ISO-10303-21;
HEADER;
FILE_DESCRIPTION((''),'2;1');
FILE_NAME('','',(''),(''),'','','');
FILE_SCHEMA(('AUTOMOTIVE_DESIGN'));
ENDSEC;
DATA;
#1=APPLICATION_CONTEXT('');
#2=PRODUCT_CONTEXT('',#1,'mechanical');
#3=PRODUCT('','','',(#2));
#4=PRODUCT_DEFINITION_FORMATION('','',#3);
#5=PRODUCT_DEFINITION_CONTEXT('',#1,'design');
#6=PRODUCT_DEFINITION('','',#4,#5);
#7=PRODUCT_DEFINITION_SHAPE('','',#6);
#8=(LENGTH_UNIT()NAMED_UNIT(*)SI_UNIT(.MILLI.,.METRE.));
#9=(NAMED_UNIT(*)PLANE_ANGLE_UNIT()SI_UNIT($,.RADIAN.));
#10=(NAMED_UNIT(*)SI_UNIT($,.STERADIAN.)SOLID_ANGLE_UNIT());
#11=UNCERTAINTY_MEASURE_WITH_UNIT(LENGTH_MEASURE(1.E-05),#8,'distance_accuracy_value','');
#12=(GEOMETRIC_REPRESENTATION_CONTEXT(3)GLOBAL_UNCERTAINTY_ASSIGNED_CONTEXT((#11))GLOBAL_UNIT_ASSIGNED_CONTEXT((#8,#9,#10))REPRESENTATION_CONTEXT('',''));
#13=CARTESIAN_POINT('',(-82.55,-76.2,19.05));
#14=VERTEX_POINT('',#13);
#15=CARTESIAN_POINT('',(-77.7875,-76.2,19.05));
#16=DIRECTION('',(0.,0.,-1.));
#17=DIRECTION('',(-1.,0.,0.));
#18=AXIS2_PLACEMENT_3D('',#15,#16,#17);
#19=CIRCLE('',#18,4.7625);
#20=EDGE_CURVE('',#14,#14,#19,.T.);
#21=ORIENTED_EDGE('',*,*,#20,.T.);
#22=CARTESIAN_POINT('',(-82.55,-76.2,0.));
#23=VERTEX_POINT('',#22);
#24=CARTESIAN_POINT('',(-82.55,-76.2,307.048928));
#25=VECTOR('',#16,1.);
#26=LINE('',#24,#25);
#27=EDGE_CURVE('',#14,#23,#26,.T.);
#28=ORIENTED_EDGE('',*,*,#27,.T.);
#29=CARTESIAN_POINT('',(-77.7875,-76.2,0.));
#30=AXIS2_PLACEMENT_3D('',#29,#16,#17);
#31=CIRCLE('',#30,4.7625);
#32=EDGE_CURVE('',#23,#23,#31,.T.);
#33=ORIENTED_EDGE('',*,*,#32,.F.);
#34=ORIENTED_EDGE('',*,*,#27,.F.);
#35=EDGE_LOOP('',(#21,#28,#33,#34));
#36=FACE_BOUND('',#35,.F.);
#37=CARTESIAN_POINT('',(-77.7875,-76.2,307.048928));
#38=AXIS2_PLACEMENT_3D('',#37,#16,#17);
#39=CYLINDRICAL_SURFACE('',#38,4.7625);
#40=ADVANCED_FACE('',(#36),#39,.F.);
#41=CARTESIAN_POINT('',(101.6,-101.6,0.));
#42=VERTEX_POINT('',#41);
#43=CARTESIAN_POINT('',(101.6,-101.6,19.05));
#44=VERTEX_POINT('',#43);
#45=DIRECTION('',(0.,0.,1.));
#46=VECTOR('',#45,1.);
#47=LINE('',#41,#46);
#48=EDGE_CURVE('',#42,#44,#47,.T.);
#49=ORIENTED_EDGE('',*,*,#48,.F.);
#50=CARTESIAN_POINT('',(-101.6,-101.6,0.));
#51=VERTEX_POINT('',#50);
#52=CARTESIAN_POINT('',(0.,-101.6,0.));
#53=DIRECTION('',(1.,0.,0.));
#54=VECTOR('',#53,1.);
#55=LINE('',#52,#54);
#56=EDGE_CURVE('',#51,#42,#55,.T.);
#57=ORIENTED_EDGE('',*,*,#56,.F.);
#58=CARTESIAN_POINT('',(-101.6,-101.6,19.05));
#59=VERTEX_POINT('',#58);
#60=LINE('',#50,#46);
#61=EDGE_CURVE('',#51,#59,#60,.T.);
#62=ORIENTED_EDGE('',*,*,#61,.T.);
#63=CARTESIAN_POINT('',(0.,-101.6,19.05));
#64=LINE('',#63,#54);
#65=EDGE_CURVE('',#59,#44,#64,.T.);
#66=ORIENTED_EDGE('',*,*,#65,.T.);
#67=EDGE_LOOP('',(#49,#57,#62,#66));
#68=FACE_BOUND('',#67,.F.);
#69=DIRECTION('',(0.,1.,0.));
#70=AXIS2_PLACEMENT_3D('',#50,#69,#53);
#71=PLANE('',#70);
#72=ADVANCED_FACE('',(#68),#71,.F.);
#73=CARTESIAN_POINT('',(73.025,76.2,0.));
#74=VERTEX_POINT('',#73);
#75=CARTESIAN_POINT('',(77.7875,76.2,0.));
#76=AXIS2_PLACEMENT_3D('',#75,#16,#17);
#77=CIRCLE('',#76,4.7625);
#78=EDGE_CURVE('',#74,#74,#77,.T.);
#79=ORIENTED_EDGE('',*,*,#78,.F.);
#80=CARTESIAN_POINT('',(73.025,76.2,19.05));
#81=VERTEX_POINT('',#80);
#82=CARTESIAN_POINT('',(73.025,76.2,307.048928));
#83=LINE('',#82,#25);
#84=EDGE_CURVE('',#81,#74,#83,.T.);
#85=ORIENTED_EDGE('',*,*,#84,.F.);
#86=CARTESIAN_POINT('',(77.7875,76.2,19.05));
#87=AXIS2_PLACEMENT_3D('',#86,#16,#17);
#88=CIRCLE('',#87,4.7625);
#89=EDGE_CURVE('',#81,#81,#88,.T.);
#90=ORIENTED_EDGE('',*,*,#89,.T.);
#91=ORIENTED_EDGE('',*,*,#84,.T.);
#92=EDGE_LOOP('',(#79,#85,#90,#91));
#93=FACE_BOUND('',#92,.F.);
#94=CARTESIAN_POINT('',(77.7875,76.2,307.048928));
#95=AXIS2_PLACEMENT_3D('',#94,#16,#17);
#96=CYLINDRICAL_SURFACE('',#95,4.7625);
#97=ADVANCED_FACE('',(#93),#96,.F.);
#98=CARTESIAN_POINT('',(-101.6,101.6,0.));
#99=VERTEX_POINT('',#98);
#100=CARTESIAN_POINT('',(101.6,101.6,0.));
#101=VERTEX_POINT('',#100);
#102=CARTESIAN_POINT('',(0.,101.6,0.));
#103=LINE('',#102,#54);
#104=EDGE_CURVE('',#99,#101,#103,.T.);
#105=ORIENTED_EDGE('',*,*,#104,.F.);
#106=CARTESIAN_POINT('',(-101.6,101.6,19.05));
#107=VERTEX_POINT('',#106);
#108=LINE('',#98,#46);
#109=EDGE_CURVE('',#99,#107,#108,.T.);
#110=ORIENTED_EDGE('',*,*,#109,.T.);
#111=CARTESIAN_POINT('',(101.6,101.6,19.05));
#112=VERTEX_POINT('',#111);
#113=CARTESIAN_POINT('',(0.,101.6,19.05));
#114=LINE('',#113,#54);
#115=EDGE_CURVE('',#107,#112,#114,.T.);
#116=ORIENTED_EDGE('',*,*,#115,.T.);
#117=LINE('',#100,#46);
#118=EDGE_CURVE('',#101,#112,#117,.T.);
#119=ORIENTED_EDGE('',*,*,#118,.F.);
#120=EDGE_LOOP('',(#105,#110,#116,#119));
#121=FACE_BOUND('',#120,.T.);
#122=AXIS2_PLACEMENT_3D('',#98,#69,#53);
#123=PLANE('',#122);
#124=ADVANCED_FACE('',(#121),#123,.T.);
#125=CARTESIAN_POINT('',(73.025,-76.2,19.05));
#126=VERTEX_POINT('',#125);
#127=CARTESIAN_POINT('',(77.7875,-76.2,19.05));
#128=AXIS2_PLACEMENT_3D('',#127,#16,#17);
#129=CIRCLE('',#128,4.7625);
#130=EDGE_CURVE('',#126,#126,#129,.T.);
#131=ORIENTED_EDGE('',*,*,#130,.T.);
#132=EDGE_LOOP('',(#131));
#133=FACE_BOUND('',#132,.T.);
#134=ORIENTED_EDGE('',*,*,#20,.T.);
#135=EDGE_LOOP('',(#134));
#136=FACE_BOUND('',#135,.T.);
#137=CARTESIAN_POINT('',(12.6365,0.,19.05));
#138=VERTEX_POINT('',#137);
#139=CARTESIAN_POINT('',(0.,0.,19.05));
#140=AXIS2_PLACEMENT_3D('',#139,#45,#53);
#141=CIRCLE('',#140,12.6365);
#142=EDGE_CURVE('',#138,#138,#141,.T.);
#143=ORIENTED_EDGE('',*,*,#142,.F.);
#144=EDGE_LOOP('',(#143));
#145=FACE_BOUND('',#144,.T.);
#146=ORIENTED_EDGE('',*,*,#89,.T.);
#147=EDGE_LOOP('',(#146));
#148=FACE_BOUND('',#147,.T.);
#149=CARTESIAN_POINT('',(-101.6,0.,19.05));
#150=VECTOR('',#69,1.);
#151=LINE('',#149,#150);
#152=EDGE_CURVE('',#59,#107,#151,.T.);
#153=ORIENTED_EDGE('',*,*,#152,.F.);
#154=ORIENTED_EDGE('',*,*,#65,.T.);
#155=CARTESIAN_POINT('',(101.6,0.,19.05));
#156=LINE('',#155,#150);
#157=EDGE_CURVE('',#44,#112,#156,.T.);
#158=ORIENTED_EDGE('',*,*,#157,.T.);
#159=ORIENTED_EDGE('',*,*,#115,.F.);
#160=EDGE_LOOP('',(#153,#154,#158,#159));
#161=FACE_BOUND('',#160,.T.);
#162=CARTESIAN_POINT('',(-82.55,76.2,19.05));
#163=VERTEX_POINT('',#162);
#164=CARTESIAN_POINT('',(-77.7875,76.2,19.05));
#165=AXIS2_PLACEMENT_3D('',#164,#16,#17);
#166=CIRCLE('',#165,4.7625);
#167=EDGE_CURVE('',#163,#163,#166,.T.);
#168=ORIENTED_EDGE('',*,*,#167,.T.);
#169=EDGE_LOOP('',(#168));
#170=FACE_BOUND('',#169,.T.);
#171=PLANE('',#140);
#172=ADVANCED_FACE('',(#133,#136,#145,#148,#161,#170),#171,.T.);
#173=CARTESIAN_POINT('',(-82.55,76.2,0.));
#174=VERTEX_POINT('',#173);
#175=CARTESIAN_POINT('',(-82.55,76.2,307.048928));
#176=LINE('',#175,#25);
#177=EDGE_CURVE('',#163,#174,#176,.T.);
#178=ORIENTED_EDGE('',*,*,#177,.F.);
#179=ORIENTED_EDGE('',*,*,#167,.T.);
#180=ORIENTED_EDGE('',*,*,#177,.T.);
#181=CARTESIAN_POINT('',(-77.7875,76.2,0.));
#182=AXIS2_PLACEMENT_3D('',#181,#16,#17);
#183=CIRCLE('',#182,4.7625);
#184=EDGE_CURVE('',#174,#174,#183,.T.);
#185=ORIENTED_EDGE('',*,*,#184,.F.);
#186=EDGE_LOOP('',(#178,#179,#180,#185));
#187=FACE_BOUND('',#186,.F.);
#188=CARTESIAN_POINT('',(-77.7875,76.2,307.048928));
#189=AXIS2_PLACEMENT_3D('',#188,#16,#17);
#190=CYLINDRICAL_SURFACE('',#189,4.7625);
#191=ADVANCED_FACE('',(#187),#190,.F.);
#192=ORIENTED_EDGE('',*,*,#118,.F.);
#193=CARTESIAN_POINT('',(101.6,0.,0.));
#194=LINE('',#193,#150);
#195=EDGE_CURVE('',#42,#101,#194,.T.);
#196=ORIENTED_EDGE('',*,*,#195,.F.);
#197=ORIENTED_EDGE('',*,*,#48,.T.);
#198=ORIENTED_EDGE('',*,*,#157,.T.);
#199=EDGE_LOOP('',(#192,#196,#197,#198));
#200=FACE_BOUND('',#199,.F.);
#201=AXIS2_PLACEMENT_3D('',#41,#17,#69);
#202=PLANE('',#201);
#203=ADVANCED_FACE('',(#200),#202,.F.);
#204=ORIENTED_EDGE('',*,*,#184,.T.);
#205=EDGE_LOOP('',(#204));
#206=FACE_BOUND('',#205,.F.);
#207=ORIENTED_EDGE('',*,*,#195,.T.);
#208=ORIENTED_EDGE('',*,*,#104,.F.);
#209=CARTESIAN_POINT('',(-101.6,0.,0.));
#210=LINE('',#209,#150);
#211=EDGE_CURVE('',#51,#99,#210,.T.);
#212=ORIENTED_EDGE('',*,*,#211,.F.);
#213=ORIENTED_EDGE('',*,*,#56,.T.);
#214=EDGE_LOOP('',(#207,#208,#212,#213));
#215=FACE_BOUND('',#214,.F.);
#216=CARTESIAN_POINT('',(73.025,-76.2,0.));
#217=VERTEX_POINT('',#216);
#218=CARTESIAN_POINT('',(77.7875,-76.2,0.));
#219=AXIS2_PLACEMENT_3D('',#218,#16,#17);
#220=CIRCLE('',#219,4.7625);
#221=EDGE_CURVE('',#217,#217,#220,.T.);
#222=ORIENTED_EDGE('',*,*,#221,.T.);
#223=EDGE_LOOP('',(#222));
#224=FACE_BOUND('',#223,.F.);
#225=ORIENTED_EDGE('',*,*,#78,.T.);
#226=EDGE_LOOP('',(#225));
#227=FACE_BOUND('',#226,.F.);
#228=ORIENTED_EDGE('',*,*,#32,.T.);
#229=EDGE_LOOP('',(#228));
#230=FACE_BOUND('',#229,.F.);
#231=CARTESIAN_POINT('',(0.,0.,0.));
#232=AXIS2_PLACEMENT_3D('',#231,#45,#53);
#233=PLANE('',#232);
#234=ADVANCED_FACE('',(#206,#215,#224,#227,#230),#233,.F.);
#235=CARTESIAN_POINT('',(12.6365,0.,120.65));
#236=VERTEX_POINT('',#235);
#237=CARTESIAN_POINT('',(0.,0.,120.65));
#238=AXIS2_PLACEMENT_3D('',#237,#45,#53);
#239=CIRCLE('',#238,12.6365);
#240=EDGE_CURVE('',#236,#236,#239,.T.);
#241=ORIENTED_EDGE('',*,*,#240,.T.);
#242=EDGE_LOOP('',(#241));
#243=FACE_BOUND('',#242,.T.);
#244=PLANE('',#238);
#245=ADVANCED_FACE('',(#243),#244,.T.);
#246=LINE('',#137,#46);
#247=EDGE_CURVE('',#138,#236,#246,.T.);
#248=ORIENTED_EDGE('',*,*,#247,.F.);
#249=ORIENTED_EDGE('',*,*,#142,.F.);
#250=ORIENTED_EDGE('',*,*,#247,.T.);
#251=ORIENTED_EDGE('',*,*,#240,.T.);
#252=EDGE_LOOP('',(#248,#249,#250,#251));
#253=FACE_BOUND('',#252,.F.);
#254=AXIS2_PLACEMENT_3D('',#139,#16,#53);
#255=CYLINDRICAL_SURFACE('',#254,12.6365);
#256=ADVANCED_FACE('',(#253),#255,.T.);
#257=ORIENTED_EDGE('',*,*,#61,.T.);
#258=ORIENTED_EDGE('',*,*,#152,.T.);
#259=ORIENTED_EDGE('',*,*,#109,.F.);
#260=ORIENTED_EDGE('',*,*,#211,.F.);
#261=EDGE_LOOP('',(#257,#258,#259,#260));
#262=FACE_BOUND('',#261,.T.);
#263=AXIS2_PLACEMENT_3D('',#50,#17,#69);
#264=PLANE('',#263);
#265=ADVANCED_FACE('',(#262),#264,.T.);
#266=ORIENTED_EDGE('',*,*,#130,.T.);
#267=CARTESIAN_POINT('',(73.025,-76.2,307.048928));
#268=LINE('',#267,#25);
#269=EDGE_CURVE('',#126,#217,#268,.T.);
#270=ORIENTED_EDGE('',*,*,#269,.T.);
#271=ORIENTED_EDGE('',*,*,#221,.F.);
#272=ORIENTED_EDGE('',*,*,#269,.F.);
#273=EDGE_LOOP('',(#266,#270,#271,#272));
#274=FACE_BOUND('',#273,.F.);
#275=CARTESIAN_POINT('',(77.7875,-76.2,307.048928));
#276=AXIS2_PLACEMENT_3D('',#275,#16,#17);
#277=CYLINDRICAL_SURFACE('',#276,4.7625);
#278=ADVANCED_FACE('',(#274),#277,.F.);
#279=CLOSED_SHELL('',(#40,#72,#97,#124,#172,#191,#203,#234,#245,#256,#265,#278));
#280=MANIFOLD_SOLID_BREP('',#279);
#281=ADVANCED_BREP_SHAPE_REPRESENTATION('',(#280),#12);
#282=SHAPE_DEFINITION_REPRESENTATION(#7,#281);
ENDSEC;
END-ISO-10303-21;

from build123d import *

# Parameters (mm, degrees)
F0_W     = 203.2
F0_H     = 203.2
F1_DEPTH = 19.05
F3_D     = 9.525
F4_R     = 12.6365
F5_DEPTH = 101.6


# Not quite as in the source:
# - a length typed as a fraction of an inch, garbled in the dataset ("3 / 203.2 mm" for 3/8 in), is restored


with BuildPart() as f1:
    # F0 (on Top) → F1 (new body)
    with BuildSketch(Plane.XY):
        Rectangle(F0_W, F0_H)
    extrude(amount=F1_DEPTH)

    # F3 (through all)
    with Locations(Plane.XY.offset(19.05)):
        with Locations((-77.7875, 76.2), (77.7875, 76.2), (-77.7875, -76.2), (77.7875, -76.2)):
            Hole(F3_D / 2)

    # F4 (on face) → F5 (join)
    with BuildSketch(Plane.XY.offset(19.05)):
        Circle(F4_R)
    extrude(amount=F5_DEPTH)


solid = f1.part
